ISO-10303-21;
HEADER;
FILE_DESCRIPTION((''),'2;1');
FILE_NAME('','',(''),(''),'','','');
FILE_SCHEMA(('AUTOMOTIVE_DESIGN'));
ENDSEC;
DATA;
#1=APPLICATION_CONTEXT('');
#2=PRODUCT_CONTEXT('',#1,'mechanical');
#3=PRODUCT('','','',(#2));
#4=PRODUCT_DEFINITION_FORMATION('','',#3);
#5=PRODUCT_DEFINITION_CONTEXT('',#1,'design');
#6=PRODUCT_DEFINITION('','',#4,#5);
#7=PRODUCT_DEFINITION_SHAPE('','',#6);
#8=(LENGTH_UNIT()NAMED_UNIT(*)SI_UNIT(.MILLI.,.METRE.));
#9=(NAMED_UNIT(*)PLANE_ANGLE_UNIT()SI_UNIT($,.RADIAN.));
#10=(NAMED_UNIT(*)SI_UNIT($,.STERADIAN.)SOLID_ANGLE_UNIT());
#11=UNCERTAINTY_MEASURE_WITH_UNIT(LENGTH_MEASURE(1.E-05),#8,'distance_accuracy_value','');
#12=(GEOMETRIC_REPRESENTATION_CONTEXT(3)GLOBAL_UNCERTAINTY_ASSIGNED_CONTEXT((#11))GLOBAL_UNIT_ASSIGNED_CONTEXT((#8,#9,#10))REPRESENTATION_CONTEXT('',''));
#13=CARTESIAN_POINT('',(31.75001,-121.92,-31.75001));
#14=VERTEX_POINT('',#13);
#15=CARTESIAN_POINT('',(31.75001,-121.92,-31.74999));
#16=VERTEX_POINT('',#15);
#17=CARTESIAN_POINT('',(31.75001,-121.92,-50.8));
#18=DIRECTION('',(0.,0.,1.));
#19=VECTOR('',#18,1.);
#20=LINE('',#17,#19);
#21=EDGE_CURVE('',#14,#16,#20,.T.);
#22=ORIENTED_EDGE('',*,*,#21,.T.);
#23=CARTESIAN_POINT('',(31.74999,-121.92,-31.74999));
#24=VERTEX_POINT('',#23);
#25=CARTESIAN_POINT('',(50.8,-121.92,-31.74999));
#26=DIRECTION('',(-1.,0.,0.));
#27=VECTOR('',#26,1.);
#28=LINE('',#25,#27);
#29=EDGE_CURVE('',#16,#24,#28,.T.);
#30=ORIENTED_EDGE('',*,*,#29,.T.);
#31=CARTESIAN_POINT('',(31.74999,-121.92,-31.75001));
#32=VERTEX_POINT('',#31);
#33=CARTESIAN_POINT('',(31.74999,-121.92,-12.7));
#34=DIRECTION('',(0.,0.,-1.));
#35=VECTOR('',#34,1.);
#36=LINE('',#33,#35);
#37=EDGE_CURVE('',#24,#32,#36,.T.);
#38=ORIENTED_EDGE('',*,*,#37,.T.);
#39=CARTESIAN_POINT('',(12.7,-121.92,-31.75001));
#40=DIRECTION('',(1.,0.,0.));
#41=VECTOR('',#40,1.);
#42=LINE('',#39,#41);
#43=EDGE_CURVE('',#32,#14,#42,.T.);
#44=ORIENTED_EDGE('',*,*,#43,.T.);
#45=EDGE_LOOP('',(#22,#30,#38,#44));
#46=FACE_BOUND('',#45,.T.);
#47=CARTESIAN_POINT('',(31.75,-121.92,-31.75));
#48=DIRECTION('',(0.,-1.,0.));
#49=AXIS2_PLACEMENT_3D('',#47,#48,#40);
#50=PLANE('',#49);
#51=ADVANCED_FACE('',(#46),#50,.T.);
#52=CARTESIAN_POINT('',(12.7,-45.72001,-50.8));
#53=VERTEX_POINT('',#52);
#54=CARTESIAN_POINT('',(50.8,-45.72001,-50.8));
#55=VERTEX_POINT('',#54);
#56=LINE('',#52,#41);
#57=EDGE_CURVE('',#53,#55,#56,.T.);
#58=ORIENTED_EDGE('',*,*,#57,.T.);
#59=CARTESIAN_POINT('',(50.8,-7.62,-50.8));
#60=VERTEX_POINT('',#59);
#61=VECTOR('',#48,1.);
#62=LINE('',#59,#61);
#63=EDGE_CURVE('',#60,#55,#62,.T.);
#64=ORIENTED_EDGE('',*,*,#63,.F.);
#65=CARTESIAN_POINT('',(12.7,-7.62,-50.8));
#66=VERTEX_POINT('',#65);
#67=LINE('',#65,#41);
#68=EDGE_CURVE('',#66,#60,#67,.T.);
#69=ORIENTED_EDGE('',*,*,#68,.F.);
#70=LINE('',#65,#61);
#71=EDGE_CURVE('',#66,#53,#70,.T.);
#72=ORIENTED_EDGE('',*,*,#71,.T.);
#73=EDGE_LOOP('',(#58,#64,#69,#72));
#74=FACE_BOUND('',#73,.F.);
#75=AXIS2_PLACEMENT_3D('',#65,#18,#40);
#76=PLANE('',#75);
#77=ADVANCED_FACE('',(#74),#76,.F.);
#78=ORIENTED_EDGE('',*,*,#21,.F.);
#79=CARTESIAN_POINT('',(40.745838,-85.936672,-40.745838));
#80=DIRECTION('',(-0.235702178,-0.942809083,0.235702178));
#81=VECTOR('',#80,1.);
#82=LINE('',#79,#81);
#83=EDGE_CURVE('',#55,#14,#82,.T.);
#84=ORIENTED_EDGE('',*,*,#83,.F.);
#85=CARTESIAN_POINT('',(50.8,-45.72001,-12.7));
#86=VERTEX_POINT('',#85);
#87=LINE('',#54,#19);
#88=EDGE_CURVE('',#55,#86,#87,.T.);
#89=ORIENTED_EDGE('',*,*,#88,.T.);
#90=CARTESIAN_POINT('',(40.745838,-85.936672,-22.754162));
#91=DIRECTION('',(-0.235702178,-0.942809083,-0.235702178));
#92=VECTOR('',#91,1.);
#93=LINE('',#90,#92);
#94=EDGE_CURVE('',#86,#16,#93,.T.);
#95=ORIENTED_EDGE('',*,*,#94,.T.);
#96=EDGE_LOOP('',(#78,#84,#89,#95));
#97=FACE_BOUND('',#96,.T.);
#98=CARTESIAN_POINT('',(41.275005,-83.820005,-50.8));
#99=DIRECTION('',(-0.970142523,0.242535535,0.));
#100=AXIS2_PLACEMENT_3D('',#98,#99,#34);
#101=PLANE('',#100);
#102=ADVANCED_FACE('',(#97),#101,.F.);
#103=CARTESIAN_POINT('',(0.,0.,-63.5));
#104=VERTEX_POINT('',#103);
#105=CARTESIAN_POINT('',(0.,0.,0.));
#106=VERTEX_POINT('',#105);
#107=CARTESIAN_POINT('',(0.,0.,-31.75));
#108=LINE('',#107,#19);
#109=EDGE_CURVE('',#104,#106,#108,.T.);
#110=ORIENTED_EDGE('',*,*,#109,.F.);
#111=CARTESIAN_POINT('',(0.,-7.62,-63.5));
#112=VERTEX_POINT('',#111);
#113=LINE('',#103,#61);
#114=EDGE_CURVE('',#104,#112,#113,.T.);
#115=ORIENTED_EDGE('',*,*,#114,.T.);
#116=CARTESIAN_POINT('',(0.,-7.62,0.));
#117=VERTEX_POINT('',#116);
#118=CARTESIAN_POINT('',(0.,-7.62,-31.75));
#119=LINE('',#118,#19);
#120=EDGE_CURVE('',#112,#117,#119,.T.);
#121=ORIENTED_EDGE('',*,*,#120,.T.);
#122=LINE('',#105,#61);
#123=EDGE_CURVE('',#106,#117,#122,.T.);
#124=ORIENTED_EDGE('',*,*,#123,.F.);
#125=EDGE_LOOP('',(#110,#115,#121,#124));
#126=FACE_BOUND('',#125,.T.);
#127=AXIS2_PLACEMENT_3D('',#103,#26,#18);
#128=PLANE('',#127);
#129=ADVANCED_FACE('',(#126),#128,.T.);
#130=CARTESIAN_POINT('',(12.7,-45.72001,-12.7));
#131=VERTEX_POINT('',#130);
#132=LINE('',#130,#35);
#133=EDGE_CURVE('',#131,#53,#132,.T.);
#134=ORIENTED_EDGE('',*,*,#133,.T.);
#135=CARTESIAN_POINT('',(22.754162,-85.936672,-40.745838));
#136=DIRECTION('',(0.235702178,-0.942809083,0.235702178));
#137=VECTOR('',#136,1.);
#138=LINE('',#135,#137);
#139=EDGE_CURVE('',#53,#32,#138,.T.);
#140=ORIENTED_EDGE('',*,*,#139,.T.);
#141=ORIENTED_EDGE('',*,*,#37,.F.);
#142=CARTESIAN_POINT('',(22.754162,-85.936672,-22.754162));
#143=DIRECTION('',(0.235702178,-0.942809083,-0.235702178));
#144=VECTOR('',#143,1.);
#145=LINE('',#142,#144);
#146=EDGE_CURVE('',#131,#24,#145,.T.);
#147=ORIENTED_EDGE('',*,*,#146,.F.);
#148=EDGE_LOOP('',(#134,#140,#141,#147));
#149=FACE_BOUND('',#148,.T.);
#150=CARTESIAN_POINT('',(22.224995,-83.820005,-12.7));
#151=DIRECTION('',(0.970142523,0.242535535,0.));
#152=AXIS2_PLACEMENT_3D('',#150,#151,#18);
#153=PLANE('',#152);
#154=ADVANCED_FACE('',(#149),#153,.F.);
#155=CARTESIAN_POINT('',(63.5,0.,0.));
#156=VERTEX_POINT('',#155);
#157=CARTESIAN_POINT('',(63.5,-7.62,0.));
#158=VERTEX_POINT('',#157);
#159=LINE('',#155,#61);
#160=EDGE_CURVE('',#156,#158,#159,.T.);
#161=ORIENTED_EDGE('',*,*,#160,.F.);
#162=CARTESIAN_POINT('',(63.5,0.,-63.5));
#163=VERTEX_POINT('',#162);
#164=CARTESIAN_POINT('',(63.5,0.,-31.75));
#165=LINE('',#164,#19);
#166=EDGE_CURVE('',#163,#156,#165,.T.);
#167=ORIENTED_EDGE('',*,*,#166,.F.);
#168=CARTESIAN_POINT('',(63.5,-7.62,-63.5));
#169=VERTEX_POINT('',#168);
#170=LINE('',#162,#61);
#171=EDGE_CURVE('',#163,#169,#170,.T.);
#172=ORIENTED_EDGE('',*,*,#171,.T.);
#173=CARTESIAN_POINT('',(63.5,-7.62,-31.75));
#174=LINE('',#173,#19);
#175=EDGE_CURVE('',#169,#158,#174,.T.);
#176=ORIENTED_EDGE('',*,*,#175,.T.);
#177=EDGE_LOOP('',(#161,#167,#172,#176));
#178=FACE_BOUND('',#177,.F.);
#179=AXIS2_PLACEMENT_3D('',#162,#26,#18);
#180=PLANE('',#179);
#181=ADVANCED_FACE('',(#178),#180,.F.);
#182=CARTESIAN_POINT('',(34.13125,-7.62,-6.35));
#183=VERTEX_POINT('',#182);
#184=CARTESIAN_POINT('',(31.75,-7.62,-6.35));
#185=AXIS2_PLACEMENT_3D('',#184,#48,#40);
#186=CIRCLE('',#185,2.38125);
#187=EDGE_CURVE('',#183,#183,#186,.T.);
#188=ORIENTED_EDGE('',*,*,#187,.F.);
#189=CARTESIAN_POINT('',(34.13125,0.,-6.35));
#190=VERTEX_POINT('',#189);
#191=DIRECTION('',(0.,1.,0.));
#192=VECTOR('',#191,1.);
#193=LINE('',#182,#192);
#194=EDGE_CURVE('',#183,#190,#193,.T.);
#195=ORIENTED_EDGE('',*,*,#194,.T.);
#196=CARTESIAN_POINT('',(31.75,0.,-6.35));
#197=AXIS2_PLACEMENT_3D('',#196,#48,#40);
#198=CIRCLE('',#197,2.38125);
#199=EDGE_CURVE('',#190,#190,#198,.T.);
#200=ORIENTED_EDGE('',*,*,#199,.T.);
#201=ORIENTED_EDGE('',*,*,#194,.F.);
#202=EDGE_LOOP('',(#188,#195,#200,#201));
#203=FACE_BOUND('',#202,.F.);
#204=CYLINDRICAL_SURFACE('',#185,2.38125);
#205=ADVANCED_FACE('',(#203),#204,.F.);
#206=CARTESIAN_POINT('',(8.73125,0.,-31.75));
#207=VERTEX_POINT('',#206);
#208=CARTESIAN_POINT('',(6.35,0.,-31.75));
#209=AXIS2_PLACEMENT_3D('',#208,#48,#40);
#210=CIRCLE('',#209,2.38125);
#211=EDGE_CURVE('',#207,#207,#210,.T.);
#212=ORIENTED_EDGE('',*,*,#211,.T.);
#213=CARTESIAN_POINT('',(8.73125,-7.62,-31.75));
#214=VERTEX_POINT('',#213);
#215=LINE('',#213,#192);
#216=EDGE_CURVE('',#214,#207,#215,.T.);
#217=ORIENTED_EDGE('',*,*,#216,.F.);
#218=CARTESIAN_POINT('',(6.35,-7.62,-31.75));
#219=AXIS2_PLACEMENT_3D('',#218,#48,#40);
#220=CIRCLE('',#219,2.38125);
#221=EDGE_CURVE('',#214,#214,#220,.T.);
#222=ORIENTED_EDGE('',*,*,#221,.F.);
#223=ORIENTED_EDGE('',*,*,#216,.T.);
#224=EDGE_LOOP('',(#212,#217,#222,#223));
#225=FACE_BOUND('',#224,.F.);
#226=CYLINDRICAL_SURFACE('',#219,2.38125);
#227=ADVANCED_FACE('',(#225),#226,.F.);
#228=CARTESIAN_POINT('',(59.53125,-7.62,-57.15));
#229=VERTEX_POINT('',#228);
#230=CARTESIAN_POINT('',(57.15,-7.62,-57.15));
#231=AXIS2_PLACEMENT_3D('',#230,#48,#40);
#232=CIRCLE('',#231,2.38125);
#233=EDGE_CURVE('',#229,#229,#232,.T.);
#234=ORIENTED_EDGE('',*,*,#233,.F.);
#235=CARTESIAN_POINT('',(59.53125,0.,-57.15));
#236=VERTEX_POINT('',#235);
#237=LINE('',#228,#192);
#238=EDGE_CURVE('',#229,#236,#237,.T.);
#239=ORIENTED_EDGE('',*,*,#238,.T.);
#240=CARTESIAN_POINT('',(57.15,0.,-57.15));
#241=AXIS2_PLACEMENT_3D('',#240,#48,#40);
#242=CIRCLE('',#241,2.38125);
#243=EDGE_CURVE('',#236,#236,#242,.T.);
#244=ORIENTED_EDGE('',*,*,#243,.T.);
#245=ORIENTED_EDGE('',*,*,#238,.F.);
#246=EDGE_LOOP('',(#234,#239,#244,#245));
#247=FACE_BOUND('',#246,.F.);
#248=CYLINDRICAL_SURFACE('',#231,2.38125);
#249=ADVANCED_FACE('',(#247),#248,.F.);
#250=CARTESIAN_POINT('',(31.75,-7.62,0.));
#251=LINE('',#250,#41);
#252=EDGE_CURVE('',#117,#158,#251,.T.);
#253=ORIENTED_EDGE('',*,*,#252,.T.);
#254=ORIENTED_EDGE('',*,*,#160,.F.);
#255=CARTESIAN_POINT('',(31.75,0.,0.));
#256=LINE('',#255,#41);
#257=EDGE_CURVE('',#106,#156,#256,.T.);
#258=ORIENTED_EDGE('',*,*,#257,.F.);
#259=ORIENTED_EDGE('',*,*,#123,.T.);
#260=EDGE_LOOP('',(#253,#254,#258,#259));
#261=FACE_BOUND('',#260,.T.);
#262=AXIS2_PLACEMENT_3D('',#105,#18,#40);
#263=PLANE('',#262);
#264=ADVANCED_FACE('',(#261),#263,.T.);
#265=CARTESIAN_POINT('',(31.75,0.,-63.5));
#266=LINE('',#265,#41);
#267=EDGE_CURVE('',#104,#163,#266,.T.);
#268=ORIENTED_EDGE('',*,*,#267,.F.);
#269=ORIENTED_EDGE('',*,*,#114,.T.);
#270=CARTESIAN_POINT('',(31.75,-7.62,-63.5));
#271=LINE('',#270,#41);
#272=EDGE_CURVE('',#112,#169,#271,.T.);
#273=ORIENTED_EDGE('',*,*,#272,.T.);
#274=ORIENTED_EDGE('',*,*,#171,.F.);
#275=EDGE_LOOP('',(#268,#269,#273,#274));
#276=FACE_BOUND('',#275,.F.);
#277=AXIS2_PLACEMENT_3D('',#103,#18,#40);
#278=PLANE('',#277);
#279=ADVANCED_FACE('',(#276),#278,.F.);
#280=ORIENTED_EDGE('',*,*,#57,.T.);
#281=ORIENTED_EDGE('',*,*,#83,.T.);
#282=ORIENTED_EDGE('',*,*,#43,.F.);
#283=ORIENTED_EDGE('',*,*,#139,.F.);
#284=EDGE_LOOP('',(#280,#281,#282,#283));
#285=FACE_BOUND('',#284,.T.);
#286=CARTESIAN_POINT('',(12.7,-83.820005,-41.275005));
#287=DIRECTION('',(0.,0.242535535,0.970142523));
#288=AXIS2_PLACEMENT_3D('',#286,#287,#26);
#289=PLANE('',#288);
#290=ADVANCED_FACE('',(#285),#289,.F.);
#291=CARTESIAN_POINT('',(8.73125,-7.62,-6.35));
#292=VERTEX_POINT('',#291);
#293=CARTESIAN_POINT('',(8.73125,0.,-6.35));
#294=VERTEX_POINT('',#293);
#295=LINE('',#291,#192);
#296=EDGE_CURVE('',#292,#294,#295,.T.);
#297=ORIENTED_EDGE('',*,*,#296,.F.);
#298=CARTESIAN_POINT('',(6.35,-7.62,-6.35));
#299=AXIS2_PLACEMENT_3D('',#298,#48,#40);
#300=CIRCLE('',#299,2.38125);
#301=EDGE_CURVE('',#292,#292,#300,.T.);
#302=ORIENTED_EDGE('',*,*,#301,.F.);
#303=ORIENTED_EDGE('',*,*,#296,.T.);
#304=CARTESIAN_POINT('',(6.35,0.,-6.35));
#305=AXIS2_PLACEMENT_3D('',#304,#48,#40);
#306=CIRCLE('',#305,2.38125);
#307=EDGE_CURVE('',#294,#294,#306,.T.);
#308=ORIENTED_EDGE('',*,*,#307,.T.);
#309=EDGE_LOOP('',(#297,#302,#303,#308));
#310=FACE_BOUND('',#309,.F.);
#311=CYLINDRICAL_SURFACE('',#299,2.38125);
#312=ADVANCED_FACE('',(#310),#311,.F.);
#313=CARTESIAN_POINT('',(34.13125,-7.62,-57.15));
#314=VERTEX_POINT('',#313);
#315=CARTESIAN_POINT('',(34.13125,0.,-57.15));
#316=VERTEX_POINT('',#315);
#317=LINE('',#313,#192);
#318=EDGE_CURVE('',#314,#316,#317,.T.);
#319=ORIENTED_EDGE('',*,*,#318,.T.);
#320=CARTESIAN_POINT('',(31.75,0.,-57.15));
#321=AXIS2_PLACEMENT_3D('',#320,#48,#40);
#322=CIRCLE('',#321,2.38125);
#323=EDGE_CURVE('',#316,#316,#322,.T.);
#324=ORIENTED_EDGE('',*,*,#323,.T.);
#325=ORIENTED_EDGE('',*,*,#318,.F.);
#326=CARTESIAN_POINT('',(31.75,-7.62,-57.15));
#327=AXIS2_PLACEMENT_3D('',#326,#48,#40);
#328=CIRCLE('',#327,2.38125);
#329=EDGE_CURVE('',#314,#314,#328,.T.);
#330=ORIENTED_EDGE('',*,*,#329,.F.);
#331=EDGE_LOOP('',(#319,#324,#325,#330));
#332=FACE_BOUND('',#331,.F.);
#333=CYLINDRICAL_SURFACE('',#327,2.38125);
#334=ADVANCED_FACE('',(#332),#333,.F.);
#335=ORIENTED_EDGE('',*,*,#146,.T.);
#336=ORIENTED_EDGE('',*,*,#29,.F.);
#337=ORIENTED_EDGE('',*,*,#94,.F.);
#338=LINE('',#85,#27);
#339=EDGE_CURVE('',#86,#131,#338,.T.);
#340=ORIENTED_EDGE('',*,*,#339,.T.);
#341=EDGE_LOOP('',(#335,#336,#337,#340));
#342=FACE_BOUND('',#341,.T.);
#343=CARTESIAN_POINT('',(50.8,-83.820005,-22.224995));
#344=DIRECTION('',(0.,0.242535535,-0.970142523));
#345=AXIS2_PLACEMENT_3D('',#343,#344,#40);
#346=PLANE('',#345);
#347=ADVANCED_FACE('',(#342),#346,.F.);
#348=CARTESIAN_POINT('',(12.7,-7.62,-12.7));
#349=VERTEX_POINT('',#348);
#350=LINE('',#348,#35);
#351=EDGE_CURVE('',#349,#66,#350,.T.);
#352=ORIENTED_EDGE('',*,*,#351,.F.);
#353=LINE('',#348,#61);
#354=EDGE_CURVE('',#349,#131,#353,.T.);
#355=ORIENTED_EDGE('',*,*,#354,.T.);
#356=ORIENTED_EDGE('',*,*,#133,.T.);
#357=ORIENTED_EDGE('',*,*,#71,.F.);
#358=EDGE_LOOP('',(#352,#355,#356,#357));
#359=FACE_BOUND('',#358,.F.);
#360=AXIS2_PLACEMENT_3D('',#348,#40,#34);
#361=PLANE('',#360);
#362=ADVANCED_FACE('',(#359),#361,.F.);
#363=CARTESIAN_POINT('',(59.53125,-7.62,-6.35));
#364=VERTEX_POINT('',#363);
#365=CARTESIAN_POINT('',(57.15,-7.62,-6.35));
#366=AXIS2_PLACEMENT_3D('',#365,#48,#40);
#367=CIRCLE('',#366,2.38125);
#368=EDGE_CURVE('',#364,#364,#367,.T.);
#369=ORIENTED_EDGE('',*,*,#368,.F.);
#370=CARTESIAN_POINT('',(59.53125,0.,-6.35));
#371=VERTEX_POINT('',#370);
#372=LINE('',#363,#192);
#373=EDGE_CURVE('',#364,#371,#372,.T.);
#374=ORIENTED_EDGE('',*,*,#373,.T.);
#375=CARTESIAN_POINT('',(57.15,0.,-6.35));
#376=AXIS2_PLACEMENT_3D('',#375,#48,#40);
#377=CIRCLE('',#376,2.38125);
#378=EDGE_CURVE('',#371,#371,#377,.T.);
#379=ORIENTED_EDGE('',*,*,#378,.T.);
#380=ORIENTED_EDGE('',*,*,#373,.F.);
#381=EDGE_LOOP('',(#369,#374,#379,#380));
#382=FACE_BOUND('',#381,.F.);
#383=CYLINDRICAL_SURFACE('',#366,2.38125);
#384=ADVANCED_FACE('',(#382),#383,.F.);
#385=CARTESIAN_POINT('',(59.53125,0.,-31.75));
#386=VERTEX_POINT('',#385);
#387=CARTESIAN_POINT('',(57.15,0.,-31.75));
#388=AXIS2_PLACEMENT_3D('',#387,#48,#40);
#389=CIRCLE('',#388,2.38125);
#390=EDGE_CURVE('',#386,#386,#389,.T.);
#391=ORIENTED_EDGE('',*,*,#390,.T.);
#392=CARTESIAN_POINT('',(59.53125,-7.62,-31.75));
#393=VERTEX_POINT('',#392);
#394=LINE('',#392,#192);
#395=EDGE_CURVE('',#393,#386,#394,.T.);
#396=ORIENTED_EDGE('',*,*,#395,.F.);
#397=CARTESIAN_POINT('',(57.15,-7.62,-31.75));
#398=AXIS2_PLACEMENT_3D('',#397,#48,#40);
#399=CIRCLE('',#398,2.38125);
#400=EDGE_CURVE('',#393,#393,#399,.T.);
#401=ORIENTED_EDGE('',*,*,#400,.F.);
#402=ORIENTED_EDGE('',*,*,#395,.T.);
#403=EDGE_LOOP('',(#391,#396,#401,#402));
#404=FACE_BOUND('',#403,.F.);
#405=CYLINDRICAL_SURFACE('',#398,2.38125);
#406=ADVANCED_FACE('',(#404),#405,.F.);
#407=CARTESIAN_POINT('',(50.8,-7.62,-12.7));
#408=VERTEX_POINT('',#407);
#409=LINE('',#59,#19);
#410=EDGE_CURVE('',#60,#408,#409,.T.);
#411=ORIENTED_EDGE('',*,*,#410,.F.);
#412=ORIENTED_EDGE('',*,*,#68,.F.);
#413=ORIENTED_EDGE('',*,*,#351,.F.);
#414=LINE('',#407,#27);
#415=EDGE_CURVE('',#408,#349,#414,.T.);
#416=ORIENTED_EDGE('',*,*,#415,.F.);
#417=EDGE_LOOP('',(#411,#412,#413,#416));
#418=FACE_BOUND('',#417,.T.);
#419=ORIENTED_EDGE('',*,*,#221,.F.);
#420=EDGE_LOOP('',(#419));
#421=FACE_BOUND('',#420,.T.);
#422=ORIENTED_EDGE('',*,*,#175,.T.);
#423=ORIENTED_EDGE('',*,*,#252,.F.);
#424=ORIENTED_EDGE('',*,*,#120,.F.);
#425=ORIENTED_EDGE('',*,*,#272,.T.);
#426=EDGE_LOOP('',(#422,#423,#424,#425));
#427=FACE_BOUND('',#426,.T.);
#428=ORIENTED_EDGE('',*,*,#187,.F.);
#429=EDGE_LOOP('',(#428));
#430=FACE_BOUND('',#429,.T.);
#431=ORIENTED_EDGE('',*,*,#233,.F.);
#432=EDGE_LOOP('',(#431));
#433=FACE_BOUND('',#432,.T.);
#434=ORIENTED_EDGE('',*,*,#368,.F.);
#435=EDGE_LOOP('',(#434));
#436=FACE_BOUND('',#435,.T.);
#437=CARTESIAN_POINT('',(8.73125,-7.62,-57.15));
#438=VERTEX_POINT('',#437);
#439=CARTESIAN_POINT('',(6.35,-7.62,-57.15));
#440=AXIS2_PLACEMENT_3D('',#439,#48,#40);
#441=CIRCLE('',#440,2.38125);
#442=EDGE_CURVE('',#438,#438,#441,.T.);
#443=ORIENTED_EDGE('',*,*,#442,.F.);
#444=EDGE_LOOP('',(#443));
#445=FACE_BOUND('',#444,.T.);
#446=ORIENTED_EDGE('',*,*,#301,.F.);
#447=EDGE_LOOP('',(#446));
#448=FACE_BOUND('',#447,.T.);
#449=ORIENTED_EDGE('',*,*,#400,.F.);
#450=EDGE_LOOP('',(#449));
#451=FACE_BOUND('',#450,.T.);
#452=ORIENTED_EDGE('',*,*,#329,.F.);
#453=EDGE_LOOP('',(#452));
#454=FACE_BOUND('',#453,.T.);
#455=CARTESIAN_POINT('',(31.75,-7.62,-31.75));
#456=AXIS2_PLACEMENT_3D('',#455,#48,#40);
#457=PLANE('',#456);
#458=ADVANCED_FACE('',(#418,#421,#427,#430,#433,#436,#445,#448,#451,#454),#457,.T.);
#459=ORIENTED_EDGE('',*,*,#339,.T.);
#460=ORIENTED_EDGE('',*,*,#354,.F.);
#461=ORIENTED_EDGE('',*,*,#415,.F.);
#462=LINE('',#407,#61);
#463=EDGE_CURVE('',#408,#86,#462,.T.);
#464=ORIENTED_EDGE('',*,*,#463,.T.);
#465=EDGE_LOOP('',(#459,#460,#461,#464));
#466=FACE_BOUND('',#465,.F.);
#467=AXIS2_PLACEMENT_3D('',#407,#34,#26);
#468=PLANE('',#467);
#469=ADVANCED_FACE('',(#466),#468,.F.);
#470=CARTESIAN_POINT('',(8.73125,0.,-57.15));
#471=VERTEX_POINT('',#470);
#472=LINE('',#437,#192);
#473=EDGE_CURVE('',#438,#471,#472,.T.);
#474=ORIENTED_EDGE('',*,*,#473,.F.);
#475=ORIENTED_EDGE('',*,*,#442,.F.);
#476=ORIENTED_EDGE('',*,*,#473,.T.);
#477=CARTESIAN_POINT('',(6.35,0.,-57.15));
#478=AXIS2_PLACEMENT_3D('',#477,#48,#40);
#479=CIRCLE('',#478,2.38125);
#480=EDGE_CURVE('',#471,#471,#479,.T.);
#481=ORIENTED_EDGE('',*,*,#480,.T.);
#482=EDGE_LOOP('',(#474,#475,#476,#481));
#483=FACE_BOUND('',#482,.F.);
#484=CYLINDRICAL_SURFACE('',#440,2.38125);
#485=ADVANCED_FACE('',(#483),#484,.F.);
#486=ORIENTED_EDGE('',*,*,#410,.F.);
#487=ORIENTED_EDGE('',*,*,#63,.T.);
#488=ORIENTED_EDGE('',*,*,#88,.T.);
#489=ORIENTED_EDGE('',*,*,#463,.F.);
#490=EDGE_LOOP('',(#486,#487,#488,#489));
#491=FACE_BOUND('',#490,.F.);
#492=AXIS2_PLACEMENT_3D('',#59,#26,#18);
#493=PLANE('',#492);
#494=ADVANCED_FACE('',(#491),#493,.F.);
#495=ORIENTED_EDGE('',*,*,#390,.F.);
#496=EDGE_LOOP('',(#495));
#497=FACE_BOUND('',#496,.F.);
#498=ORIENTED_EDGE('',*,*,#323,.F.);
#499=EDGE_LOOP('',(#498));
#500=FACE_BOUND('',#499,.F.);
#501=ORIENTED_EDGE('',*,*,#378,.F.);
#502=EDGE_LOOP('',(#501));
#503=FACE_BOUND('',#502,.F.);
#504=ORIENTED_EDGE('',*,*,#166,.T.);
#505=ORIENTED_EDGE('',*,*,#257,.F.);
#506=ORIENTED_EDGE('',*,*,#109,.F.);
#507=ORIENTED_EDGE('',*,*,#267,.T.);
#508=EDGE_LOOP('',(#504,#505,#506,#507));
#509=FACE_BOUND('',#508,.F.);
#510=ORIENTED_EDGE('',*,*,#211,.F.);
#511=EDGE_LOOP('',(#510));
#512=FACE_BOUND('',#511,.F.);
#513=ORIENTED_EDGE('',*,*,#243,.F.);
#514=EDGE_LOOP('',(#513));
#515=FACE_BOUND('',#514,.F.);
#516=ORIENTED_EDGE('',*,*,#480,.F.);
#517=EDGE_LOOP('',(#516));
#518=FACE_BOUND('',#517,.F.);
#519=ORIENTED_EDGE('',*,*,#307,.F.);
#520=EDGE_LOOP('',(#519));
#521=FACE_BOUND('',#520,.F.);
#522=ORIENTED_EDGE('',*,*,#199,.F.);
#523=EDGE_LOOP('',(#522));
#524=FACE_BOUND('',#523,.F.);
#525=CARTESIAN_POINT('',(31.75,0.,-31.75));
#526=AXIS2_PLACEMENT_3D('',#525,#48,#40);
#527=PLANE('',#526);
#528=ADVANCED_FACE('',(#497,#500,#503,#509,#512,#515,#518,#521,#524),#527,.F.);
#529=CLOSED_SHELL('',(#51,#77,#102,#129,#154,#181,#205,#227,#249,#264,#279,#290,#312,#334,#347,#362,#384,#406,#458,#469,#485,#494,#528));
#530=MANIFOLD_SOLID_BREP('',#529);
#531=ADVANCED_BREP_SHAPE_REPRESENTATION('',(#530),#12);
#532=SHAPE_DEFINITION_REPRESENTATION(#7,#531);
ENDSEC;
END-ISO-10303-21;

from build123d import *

# Parameters (mm, degrees)
F0_W     = 63.5
F0_H     = 63.5
F1_DEPTH = 7.62
F3_DEPTH = 114.3
F4_SIZE2 = 19.04999
F4_SIZE  = 76.19999
F5_R     = 2.38125
F7_DEPTH = 25.4
F9_DEPTH = 25.4


# Not quite as in the source:
# - a fillet or chamfer is up to 0.001 mm smaller than in the source, because OpenCascade refuses the exact size


with BuildPart() as f1:
    # F0 (on Front) → F1 (new body)
    with BuildSketch(Plane.XZ):
        with Locations((31.75, -31.75)):
            Rectangle(F0_W, F0_H)
    extrude(amount=F1_DEPTH)

    # F2 (on face) → F3 (join)
    with BuildSketch(Plane.XZ.offset(7.62)):
        Polygon((50.8, -12.7), (31.75, -12.7), (12.7, -12.7), (12.7, -50.8), (50.8, -50.8), align=None)
    extrude(amount=F3_DEPTH)

    # F4 (size 76.2 and 19.05 in the source; OpenCascade refuses exactly that, so slightly less here)
    f4_edges = [f1.edges().sort_by_distance(p)[0] for p in [
        (31.75, -121.92, -12.7),
        (12.7, -121.92, -31.75),
        (31.75, -121.92, -50.8),
        (50.8, -121.92, -31.75),
    ]]
    chamfer(f4_edges, length=F4_SIZE, length2=F4_SIZE2)

    # F5 (on face) → F7 (cut)
    with BuildSketch(Plane.XZ.offset(7.62)):
        with Locations((6.35, -6.35)):
            Circle(F5_R)
    extrude(amount=-F7_DEPTH, mode=Mode.SUBTRACT)

    # F5 (on face) → F9 (cut)
    with BuildSketch(Plane.XZ.offset(7.62)):
        with Locations((6.35, -31.75)):
            Circle(F5_R)
        with Locations((6.35, -57.15)):
            Circle(F5_R)
        with Locations((31.75, -57.15)):
            Circle(F5_R)
        with Locations((57.15, -57.15)):
            Circle(F5_R)
        with Locations((57.15, -31.75)):
            Circle(F5_R)
        with Locations((57.15, -6.35)):
            Circle(F5_R)
        with Locations((31.75, -6.35)):
            Circle(F5_R)
    extrude(amount=-F9_DEPTH, mode=Mode.SUBTRACT)


solid = f1.part
